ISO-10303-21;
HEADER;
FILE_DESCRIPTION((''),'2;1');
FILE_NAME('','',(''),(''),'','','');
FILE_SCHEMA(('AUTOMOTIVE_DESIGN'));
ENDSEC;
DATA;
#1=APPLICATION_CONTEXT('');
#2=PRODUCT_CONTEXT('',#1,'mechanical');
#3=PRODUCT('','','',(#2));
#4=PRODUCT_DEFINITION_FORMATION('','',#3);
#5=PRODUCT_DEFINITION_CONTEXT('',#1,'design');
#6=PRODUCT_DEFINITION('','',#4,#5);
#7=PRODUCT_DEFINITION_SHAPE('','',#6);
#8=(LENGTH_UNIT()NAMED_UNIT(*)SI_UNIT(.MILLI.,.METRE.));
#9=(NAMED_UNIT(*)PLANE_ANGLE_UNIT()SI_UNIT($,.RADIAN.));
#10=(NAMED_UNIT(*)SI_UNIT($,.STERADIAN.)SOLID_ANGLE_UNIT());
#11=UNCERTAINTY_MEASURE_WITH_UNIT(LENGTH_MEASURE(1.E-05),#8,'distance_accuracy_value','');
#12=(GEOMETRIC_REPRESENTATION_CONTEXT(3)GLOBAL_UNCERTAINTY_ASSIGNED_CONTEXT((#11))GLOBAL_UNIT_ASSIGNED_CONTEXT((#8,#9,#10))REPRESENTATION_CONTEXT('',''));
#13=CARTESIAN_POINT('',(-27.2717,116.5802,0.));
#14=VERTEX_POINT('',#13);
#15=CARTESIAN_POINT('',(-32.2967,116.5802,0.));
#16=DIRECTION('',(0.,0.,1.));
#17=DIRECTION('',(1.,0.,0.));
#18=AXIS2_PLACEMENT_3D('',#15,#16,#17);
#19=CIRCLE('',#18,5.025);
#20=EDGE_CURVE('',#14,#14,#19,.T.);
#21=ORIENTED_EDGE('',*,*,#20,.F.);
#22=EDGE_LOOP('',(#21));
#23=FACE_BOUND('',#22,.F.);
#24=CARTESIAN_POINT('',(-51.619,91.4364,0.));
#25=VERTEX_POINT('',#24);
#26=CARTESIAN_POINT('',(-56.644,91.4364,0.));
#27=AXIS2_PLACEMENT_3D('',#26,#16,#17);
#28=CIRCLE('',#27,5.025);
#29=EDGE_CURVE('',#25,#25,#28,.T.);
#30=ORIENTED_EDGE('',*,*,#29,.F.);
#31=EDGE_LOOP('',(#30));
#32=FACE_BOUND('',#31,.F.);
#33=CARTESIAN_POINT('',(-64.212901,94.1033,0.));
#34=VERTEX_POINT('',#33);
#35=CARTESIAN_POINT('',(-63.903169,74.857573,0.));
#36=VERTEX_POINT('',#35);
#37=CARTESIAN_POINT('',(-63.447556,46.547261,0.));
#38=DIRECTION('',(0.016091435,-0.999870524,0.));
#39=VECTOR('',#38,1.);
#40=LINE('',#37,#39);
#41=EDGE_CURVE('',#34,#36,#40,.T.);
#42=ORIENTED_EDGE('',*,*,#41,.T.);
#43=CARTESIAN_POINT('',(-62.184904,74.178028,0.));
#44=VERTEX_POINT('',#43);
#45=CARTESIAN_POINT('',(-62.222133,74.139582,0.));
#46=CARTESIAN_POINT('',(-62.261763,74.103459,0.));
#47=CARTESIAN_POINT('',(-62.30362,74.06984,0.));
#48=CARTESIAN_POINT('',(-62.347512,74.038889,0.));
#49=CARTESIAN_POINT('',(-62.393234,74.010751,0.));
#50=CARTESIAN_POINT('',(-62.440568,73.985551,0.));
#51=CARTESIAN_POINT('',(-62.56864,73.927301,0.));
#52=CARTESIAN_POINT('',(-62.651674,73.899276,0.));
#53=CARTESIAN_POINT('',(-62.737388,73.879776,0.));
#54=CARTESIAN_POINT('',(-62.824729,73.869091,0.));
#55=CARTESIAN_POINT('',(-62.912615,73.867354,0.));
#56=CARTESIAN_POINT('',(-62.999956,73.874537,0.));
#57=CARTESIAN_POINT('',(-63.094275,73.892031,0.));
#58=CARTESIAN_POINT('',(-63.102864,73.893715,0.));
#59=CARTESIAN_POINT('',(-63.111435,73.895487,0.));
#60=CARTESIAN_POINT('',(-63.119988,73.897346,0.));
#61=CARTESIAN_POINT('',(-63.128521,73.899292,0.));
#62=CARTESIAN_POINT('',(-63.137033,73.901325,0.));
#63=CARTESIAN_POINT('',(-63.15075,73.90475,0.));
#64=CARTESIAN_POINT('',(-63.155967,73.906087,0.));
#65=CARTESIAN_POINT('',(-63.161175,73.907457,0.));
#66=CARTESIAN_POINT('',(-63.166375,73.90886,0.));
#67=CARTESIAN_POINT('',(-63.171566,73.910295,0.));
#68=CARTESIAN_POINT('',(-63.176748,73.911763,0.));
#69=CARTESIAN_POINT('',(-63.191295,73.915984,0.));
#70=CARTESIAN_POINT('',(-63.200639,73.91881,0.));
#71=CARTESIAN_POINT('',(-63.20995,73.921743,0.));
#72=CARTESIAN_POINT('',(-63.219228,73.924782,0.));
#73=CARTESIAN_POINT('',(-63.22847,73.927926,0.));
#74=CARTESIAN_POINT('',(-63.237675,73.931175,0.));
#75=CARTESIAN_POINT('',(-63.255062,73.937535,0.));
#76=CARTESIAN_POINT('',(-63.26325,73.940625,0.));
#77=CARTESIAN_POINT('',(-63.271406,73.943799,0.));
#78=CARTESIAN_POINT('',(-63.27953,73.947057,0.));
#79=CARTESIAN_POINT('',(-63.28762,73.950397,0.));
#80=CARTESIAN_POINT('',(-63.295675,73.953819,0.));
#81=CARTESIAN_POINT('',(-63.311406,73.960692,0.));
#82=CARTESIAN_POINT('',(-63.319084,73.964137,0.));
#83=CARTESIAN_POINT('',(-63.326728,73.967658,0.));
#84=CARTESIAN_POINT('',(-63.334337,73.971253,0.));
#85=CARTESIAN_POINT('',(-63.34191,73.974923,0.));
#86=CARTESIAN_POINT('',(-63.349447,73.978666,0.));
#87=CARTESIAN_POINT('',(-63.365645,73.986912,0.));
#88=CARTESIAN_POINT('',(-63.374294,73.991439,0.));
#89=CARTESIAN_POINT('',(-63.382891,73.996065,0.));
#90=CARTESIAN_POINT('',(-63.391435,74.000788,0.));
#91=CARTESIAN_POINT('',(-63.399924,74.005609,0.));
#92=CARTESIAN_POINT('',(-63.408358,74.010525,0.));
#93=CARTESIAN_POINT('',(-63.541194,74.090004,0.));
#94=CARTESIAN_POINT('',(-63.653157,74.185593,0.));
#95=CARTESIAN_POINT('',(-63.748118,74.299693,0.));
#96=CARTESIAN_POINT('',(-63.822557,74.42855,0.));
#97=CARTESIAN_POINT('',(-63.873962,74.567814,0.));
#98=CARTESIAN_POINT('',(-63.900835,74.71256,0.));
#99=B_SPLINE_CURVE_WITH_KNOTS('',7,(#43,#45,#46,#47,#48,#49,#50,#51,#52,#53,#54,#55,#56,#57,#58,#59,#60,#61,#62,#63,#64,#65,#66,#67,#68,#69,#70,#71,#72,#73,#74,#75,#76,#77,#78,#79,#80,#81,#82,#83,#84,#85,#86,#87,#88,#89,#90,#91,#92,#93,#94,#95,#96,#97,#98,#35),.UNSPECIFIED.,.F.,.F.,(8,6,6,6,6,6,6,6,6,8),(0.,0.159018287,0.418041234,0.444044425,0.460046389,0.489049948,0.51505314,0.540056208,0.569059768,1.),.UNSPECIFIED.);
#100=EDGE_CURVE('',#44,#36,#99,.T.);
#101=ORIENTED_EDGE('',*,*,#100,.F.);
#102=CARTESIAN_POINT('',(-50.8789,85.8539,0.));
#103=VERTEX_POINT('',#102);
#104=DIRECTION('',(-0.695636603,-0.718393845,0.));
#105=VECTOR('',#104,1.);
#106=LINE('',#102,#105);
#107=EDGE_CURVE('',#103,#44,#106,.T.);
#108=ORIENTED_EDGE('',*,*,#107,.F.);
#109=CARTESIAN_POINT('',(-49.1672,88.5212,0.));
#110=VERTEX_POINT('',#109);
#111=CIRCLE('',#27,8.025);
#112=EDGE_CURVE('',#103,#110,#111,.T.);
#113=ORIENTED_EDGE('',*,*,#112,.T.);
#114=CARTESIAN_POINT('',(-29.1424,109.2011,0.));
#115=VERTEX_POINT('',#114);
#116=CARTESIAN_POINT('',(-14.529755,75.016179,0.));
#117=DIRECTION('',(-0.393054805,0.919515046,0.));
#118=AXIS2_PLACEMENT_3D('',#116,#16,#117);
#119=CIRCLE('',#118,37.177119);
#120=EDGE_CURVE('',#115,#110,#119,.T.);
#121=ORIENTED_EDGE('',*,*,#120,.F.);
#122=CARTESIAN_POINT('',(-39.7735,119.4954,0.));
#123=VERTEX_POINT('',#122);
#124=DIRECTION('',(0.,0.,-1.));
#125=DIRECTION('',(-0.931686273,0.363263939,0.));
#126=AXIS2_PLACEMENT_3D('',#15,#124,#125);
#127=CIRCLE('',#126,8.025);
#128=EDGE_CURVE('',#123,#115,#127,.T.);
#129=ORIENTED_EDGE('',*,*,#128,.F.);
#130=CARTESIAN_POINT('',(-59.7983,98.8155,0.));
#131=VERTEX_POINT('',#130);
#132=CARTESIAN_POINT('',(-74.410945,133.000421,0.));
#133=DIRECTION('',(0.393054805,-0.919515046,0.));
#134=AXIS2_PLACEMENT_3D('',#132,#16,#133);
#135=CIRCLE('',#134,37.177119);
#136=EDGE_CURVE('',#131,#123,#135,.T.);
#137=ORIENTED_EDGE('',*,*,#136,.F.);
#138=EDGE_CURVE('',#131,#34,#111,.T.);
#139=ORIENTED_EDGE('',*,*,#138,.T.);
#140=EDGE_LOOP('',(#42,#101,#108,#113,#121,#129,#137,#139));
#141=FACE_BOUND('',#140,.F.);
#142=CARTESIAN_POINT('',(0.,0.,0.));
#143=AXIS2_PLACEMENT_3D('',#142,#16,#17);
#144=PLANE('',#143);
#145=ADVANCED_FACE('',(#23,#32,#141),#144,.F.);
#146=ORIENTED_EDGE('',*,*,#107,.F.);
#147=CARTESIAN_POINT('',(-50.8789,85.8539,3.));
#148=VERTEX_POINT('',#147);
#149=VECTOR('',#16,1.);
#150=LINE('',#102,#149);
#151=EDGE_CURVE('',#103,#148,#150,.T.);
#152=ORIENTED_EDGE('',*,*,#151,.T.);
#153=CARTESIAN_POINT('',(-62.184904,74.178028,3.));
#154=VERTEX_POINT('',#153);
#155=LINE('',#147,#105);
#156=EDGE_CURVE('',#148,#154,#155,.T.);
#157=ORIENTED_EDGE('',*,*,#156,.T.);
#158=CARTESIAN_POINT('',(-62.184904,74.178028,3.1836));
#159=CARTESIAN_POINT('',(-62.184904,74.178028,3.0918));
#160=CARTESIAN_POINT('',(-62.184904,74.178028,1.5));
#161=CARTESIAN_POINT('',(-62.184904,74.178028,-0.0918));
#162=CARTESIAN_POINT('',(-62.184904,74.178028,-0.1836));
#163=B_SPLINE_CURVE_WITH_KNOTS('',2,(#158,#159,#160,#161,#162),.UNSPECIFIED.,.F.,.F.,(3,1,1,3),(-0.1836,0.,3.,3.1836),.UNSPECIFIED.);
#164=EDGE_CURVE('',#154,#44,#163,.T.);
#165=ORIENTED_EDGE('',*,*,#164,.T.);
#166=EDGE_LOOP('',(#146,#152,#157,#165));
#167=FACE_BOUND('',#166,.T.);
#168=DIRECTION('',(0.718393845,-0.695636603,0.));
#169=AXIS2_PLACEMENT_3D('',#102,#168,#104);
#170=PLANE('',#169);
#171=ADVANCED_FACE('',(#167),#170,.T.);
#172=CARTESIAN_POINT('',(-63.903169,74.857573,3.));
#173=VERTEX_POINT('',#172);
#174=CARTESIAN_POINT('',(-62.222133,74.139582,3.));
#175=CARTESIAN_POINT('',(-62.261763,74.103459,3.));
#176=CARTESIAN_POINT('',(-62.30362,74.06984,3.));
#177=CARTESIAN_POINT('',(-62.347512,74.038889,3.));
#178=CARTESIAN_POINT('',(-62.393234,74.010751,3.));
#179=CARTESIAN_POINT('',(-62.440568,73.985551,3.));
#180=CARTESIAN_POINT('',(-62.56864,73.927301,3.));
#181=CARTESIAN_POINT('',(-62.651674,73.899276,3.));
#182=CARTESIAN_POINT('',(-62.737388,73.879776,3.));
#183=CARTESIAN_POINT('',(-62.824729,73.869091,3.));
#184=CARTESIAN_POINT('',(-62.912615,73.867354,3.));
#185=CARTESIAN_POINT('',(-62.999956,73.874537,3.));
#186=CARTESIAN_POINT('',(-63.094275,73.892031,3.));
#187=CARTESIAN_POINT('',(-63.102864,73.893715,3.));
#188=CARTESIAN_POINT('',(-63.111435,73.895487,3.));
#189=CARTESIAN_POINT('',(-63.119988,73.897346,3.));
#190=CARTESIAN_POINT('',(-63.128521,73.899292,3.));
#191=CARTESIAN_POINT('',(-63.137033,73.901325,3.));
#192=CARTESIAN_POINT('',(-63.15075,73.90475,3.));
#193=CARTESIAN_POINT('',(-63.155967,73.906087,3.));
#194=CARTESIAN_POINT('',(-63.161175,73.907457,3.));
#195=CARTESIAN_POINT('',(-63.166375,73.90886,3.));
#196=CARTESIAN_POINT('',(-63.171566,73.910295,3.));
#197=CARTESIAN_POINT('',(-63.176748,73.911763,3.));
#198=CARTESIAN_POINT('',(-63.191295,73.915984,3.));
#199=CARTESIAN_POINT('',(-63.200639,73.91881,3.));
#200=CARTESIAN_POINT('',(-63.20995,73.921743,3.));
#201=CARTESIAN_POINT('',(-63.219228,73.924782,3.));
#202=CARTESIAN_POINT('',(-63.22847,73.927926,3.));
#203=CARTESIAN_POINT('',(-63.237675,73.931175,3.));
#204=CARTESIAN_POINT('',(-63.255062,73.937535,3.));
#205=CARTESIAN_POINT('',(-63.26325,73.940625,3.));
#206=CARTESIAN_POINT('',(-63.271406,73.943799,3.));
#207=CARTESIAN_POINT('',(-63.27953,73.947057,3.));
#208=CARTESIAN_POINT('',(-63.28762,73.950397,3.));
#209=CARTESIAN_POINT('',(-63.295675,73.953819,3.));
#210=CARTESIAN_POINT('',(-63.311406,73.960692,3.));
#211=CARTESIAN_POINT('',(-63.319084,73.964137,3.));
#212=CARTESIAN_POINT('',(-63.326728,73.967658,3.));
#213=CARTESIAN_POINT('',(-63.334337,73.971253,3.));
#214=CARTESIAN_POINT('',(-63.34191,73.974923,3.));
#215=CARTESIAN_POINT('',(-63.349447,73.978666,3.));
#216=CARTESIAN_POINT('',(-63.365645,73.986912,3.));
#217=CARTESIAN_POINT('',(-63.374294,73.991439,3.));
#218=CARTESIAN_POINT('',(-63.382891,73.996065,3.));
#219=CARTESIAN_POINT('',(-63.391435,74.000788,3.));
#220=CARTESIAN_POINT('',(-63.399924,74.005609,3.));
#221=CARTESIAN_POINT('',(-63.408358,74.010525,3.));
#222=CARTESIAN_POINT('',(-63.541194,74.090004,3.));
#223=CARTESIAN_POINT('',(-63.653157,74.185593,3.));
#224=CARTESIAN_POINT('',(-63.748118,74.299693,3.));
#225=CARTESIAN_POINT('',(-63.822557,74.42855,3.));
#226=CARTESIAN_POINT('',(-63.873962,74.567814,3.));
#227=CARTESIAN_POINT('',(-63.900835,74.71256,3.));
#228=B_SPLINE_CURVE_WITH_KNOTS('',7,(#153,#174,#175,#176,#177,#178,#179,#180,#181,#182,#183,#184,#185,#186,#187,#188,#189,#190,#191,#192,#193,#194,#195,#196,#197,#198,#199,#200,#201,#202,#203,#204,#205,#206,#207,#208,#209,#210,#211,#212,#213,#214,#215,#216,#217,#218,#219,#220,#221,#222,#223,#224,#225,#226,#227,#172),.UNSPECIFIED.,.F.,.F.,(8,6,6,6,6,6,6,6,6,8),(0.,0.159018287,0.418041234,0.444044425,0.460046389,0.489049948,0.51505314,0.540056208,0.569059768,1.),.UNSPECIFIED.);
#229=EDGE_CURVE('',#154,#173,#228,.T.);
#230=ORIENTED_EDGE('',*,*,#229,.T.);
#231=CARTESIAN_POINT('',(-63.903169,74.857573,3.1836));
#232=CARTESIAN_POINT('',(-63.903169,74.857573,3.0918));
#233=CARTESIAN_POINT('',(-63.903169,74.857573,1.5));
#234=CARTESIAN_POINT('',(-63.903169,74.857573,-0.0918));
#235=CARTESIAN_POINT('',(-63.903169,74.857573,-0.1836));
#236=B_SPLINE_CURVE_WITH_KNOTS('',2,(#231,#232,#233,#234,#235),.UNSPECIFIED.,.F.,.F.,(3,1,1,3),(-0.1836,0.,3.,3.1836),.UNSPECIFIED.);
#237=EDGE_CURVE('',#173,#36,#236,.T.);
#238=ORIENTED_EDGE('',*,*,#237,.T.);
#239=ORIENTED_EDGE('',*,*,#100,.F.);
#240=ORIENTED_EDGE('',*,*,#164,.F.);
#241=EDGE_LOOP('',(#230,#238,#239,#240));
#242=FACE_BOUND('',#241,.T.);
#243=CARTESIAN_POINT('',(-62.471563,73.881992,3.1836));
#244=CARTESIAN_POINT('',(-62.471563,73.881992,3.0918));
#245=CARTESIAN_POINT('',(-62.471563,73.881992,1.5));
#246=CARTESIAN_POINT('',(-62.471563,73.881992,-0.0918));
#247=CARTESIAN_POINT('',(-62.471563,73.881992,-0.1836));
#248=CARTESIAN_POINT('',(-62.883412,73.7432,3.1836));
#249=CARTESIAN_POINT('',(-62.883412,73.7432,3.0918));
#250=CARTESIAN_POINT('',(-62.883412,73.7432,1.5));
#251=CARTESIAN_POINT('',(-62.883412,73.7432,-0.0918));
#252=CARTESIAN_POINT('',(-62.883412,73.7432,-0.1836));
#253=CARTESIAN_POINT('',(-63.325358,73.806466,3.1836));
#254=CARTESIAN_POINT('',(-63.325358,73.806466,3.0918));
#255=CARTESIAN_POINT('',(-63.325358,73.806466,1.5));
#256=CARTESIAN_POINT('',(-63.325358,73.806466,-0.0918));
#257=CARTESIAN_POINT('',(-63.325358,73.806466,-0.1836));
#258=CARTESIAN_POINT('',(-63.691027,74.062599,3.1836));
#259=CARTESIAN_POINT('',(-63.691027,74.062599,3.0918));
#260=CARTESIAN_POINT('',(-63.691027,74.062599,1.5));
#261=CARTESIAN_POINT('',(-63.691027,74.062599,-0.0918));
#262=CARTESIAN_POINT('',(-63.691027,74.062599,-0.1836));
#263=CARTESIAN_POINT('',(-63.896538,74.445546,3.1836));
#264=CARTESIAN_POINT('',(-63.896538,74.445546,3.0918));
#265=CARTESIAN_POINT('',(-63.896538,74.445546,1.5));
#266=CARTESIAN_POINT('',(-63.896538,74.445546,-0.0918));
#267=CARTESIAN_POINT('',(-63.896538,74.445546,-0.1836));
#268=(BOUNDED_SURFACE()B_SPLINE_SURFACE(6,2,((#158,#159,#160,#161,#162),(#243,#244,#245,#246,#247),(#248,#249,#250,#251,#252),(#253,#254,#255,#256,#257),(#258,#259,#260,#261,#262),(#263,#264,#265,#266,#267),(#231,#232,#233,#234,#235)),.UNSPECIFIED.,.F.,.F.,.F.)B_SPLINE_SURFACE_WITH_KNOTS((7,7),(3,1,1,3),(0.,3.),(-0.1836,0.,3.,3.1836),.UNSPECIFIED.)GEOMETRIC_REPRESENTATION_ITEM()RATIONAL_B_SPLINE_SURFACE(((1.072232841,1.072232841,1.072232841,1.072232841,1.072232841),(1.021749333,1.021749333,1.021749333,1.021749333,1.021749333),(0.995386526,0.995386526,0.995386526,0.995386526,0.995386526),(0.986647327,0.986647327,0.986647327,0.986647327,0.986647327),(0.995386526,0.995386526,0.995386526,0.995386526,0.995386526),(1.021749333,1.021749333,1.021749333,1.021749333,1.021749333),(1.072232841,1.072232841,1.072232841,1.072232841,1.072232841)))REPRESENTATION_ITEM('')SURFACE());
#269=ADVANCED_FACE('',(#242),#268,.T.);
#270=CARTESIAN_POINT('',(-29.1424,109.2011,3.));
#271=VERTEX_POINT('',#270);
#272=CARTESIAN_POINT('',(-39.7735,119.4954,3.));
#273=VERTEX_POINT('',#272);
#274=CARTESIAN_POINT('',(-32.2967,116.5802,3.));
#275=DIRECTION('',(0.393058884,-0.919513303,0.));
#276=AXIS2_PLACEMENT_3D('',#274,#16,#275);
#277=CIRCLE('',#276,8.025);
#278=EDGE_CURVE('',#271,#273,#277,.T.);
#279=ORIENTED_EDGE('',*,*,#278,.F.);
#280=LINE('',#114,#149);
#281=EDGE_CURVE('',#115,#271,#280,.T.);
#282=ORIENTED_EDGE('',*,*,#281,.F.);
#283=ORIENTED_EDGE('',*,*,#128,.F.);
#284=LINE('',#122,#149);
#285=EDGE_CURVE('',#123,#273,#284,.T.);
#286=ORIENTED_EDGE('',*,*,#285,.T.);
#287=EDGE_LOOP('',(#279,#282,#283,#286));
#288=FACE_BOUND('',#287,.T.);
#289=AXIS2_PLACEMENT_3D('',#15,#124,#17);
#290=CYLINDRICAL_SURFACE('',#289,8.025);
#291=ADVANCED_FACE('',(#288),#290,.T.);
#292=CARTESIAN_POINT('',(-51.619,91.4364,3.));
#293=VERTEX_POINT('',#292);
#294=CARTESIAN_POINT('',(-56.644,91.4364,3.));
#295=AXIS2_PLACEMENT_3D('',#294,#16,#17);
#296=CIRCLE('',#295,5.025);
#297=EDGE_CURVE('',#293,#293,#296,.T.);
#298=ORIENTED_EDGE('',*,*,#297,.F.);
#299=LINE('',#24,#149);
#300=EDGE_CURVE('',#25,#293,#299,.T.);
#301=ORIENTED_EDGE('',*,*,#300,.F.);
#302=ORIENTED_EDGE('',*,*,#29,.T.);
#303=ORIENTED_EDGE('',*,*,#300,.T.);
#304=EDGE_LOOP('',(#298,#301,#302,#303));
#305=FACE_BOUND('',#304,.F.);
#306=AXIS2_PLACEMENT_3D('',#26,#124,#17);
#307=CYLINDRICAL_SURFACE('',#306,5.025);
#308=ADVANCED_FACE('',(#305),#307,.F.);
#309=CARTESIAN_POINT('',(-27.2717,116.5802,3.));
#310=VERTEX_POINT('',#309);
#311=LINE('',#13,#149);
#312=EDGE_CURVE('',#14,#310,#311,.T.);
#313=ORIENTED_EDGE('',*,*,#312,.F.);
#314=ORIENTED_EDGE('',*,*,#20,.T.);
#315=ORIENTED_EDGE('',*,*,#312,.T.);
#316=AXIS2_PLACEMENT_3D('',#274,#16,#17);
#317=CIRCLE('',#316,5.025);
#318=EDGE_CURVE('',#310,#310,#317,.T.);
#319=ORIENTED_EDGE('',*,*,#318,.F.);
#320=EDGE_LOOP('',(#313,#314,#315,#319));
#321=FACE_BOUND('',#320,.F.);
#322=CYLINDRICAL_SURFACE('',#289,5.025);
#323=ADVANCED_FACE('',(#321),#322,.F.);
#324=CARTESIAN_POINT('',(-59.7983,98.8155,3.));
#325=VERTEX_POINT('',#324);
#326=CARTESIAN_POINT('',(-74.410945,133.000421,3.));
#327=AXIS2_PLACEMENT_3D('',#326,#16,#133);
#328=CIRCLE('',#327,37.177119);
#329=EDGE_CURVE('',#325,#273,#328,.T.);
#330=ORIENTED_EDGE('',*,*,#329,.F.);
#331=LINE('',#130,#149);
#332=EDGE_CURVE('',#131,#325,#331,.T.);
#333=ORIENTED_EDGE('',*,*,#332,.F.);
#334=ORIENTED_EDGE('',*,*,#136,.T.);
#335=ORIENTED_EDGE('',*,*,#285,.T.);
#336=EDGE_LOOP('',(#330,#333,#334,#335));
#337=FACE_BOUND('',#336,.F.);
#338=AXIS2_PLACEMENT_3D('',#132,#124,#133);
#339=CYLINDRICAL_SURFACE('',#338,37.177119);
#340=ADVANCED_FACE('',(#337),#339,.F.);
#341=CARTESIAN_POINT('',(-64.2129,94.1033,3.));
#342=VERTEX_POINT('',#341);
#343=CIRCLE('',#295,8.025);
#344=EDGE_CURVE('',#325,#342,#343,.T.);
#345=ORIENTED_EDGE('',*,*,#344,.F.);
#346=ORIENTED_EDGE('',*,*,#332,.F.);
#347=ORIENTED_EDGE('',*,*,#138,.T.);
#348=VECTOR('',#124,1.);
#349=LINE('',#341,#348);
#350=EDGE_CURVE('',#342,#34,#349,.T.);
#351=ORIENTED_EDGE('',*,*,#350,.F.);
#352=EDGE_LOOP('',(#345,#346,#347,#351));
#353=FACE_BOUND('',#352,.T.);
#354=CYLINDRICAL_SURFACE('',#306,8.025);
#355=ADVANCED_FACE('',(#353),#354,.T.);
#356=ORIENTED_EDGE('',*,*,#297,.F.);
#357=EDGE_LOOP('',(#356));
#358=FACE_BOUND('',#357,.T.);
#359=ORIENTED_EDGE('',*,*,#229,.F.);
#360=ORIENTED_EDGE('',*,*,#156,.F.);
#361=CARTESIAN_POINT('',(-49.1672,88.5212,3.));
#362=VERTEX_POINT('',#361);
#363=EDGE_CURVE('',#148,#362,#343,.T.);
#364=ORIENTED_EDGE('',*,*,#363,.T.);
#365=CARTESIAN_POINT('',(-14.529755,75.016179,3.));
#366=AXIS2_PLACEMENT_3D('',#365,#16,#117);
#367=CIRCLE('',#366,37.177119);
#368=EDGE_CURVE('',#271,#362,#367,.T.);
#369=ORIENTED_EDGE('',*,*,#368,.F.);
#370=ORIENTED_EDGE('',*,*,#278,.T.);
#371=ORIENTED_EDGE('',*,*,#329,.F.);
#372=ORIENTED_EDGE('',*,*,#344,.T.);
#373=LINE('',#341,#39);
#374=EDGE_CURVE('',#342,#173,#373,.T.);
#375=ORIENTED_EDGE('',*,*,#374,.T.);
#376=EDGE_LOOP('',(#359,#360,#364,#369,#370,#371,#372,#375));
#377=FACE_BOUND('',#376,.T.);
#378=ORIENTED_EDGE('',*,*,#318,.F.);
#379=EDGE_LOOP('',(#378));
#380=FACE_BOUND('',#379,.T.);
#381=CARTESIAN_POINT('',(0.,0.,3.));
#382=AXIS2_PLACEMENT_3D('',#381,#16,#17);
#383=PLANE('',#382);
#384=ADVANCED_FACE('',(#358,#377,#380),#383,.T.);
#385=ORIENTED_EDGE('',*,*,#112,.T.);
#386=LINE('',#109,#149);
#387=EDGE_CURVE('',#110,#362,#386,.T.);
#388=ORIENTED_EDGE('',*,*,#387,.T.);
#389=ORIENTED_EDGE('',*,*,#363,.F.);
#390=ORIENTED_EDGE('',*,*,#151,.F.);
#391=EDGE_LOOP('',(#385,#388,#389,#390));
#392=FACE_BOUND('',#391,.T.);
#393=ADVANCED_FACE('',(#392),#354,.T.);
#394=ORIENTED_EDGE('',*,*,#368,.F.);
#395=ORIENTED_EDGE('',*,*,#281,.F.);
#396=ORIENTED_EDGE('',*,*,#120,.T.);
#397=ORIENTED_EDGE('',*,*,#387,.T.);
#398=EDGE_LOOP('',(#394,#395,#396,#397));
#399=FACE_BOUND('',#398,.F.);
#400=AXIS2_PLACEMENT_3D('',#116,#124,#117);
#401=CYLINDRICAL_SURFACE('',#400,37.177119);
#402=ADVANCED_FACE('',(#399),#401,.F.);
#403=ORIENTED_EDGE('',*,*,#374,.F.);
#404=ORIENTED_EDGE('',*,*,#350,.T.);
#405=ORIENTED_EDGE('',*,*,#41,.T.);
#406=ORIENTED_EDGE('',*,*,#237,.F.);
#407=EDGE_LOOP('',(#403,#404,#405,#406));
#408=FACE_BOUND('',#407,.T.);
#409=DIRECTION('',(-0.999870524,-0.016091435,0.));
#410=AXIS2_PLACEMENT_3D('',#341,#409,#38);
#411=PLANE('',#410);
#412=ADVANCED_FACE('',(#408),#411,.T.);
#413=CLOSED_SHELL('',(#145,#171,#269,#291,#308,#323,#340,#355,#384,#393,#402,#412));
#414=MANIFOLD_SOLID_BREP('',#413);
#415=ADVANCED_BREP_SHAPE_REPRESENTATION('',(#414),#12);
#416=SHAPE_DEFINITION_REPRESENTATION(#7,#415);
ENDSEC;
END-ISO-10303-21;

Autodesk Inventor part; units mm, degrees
ref_plane "YZ Plane" through (0, 0, 0) normal (1, 0, 0) x (0, 1, 0)
ref_plane "XZ Plane" through (0, 0, 0) normal (0, 1, 0) x (-1, 0, 0)
ref_plane "XY Plane" through (0, 0, 0) normal (0, 0, 1) x (1, 0, 0)
sketch "スケッチ2" plane through (0, 0, 0) normal (0, 0, 1) x (1, 0, 0)
  circle A0 centre (-56.644, 91.4364) radius 8.025
  circle A1 centre (-56.644, 91.4364) radius 5.025
  arc A2 (-29.1424, 109.2011) -> (-49.1672, 88.5212) centre (-14.5297, 75.0161) ccw
  arc A3 (-59.7983, 98.8155) -> (-39.7735, 119.4954) centre (-74.411, 133.0005) ccw
  circle A4 centre (-32.2967, 116.5802) radius 8.025
  circle A5 centre (-32.2967, 116.5802) radius 5.025
  line L0 (-50.8789, 85.8539) -> (-64.3562, 71.9357)
  line L1 (-64.3562, 71.9357) -> (-64.668, 91.3073)
  line L2 (-56.644, 91.4364) -> (-32.2967, 116.5802) construction
  point P0 (0, 0)
  point P1 (0, 0)
  dimension "d5" = 45
extrude "押し出し2" add sketch "スケッチ2" along normal blind 3
fillet "フィレット2" radius 0.5 1 edges at (-64.3562, 71.9357, 1.5)
sketch "スケッチ3" plane through (0, 0, 3) normal (0, 0, 1) x (1, 0, 0)
  line L0 (-63.5165, 72.8029) -> (-50.8789, 85.8539) projected
  arc A0 (-64.3756, 73.1427) -> (-63.5165, 72.8029) centre (-63.8757, 73.1507) ccw projected
  line L1 (-64.668, 91.3073) -> (-64.3756, 73.1427) projected
  arc A1 (-59.7983, 98.8155) -> (-64.668, 91.3073) centre (-56.644, 91.4364) ccw projected
  circle A2 centre (-56.644, 91.4364) radius 5.025 projected
  arc A3 (-50.8789, 85.8539) -> (-49.1672, 88.5212) centre (-56.644, 91.4364) ccw projected
  line L2 (-64.2129, 94.1033) -> (-63.8416, 71.0319)
  point P0 (0, 0)
  point P1 (-63.8676, 72.6508)
  dimension "d9" = 0.5
extrude "押し出し3" cut sketch "スケッチ3" against normal through all
fillet "フィレット3" radius 1 1 edges at (-63.8676, 72.6508, 1.5)
properties part number "アーム揺動節2" material "アルミニウム 2014-T4"
